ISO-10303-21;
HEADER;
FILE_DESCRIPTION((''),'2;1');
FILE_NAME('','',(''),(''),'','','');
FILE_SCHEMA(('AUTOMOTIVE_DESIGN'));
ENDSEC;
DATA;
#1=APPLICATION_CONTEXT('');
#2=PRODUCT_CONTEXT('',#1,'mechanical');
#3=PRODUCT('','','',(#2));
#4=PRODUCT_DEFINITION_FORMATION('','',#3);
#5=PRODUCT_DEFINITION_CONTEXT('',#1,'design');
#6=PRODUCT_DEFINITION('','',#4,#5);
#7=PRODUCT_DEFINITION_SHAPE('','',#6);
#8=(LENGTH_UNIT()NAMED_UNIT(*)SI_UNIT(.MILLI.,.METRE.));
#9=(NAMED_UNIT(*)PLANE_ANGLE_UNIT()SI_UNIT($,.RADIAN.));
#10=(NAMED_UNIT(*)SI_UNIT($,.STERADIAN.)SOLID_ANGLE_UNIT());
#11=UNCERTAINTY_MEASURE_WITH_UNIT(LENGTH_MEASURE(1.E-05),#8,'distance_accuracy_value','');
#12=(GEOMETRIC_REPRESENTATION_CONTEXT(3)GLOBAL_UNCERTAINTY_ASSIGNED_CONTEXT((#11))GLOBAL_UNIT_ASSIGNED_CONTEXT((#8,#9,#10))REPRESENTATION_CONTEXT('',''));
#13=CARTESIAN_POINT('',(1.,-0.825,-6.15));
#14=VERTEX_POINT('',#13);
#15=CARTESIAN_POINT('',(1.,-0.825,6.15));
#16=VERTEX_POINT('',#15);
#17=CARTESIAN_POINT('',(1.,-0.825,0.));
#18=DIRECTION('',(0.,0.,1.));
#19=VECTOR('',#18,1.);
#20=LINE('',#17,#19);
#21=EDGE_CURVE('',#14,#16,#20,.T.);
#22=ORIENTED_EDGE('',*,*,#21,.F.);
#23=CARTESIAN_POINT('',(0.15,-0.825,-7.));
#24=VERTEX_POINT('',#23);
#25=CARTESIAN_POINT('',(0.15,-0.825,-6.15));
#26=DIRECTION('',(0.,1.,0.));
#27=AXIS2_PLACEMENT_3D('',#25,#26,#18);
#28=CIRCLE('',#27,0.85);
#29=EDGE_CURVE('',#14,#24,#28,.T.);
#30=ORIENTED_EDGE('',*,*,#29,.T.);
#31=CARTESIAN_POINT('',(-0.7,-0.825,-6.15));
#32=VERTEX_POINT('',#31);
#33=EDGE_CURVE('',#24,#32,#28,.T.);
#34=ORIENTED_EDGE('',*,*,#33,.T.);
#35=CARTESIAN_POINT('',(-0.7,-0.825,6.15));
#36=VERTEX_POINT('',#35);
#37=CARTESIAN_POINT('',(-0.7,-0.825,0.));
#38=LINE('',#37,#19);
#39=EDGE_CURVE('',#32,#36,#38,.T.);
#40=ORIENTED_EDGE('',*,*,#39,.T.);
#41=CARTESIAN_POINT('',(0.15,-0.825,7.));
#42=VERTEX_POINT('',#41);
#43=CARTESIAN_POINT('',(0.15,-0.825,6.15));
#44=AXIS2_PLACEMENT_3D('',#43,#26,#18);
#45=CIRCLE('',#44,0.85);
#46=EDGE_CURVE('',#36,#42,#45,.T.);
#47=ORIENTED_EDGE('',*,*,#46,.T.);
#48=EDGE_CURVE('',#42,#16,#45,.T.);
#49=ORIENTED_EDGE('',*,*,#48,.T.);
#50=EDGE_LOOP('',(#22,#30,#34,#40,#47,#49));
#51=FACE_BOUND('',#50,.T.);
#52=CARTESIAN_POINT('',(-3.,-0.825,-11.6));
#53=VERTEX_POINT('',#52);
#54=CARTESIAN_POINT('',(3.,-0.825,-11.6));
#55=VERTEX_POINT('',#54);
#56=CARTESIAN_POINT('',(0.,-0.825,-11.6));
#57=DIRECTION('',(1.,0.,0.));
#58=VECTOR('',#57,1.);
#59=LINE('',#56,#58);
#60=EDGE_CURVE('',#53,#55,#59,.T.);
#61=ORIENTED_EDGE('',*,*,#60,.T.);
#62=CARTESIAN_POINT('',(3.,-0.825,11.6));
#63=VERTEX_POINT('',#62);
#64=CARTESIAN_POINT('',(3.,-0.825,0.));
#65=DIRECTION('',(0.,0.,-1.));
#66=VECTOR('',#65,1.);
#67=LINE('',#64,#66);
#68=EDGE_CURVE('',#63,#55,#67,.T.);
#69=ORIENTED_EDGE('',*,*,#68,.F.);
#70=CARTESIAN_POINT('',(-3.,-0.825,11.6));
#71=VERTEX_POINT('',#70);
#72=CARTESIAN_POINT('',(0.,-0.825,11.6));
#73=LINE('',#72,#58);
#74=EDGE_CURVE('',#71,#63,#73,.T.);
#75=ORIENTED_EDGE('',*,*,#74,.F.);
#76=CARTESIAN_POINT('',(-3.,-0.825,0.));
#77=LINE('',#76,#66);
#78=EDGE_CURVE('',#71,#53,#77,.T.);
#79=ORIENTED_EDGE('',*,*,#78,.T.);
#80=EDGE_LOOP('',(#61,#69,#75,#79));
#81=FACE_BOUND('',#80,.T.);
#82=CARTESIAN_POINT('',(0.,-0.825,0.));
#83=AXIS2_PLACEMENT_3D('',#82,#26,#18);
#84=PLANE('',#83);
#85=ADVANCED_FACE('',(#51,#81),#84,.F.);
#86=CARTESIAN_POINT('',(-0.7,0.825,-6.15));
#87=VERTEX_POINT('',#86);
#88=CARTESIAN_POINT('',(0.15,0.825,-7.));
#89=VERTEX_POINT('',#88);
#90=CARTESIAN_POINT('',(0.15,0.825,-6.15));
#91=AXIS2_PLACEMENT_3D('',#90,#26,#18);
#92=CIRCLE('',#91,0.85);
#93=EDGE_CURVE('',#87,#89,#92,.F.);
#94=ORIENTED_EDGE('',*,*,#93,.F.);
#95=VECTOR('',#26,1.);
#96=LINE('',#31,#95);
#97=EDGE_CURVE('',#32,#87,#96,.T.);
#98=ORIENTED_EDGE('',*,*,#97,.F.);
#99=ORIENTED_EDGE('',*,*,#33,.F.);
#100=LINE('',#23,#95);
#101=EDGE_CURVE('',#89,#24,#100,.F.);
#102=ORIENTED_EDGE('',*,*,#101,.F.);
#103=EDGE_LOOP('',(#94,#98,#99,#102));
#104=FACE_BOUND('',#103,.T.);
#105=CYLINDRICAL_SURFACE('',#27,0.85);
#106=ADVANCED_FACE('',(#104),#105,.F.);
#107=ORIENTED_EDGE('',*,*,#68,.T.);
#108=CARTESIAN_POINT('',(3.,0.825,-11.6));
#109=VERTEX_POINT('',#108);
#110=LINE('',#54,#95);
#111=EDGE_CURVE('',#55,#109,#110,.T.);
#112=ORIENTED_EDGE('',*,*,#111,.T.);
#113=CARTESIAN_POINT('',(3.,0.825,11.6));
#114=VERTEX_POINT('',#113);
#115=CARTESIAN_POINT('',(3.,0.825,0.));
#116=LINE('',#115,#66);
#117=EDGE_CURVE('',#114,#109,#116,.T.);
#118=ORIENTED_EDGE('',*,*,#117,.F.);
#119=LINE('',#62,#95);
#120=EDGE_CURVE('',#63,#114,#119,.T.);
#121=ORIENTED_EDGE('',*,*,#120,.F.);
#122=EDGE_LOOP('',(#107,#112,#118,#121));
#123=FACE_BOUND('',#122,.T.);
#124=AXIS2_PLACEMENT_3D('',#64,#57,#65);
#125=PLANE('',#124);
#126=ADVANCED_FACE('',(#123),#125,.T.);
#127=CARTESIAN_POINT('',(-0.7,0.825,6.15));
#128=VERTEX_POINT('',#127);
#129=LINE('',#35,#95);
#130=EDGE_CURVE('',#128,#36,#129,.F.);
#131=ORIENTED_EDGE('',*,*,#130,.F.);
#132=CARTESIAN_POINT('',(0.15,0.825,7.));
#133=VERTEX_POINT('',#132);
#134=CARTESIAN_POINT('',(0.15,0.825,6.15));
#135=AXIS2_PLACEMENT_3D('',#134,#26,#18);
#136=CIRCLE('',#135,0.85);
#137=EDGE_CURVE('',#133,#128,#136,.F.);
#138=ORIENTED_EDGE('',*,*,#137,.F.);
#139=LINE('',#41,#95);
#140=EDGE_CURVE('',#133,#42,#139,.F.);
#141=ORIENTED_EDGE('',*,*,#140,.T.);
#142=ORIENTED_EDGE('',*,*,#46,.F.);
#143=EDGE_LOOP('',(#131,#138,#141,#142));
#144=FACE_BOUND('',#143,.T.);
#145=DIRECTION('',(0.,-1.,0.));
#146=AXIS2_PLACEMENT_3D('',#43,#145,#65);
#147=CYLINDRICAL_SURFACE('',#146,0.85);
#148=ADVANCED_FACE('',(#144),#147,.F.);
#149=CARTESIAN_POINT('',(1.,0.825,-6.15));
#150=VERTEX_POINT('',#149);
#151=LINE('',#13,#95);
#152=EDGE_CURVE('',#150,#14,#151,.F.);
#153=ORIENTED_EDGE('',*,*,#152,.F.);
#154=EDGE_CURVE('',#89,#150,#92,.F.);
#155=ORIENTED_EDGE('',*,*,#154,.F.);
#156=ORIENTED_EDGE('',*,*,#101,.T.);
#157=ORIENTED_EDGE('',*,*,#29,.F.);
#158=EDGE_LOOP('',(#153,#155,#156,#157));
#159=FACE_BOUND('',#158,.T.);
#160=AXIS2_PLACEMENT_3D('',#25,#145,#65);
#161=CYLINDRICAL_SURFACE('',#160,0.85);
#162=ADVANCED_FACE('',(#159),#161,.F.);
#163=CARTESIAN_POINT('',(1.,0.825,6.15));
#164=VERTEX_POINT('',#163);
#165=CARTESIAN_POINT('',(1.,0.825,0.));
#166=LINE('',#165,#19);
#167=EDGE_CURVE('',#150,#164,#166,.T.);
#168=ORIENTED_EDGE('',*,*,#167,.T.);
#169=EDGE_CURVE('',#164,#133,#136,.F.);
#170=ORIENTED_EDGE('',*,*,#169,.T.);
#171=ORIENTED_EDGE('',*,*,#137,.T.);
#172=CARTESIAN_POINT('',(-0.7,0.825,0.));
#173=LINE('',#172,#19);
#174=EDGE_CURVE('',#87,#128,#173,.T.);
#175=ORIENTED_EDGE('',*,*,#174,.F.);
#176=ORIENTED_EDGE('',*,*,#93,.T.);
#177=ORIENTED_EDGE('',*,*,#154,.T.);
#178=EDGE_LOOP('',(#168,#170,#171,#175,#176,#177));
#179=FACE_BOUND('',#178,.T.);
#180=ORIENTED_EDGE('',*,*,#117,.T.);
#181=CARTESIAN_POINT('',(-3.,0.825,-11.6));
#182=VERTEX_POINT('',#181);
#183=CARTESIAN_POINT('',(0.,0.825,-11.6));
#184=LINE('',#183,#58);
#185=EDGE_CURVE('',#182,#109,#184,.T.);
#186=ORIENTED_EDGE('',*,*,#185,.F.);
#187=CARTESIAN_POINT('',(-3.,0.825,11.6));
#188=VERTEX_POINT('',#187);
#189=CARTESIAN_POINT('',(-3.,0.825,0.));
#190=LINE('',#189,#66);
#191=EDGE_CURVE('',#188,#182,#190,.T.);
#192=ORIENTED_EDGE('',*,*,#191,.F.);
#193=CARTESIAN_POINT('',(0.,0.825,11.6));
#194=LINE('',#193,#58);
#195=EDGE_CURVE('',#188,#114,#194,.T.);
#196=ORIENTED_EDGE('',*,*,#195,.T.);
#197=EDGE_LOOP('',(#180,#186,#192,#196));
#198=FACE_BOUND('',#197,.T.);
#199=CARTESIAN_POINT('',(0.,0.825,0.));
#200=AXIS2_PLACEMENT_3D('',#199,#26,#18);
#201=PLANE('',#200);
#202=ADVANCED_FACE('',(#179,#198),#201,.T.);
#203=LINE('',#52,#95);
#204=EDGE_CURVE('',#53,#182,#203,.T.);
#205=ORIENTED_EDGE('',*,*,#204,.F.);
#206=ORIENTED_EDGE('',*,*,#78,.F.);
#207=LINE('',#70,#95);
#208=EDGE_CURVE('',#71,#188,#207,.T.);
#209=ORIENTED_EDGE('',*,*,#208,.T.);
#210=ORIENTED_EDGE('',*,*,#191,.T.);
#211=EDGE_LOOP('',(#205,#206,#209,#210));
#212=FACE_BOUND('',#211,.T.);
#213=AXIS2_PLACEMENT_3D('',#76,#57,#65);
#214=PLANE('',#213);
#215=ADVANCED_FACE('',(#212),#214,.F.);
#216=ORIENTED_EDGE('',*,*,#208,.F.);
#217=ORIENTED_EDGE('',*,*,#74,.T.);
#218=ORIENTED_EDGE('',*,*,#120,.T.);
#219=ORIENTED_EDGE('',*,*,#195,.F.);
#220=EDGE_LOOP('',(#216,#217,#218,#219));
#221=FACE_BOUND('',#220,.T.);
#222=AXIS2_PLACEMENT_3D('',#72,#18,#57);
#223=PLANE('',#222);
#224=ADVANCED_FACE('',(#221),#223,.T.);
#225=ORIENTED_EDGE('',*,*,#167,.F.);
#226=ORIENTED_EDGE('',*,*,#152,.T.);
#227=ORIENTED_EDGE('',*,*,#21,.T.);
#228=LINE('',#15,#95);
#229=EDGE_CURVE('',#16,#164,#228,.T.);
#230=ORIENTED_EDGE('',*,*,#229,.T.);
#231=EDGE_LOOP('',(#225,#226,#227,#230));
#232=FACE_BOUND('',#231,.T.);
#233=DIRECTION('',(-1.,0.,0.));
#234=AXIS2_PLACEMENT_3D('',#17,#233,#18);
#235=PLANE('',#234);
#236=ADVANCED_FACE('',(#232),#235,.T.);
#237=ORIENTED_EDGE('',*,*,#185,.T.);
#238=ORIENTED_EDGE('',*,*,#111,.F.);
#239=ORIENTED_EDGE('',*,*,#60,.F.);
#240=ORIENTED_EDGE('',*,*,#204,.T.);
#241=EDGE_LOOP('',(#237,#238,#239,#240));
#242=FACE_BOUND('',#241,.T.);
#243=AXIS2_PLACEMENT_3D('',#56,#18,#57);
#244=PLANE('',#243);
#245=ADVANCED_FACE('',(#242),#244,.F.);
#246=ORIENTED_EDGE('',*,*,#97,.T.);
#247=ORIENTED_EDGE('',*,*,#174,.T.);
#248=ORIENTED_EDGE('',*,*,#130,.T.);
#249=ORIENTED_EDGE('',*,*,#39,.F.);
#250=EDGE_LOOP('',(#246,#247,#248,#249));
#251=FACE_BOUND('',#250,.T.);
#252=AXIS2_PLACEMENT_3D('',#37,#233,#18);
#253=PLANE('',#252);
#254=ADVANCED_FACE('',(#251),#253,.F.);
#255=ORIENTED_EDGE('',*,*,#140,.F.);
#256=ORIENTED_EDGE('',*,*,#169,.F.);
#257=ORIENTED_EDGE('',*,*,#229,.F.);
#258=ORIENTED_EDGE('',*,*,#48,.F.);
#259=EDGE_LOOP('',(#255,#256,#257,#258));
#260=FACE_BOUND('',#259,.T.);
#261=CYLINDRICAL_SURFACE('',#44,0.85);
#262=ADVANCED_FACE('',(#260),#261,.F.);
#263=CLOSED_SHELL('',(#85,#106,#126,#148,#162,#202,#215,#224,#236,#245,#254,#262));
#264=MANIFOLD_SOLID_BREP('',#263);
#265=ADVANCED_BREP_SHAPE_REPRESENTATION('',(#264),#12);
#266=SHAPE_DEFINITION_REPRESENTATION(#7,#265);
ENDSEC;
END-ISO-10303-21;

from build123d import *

# Parameters (mm, degrees)
SKIZZE1_W                       = 6
SKIZZE1_H                       = 23.2
SKIZZE1_W_2                     = 1.7
SKIZZE1_H_2                     = 14
AUFSATZ_LINEAR_AUSTRAGEN1_DEPTH = 0.825
VERRUNDUNG2_R                   = 0.85


with BuildPart() as part:
    # Skizze1 → Aufsatz-Linear austragen1 (new, symmetric)
    with BuildSketch(Plane(origin=(0, 0, 0), x_dir=(1, 0, 0), z_dir=(0, 1, 0))):
        Rectangle(SKIZZE1_W, SKIZZE1_H)
        with Locations((0.15, 0)):
            Rectangle(SKIZZE1_W_2, SKIZZE1_H_2, mode=Mode.SUBTRACT)
    extrude(amount=AUFSATZ_LINEAR_AUSTRAGEN1_DEPTH, both=True)

    # Verrundung2
    verrundung2_edges = [part.edges().sort_by_distance(p)[0] for p in [
        (-0.7, 0, 7),
        (1, 0, 7),
        (1, 0, -7),
        (-0.7, 0, -7),
    ]]
    fillet(verrundung2_edges, radius=VERRUNDUNG2_R - 0.0001)  # a hair under: the kernel refuses the full size


solid = part.part
